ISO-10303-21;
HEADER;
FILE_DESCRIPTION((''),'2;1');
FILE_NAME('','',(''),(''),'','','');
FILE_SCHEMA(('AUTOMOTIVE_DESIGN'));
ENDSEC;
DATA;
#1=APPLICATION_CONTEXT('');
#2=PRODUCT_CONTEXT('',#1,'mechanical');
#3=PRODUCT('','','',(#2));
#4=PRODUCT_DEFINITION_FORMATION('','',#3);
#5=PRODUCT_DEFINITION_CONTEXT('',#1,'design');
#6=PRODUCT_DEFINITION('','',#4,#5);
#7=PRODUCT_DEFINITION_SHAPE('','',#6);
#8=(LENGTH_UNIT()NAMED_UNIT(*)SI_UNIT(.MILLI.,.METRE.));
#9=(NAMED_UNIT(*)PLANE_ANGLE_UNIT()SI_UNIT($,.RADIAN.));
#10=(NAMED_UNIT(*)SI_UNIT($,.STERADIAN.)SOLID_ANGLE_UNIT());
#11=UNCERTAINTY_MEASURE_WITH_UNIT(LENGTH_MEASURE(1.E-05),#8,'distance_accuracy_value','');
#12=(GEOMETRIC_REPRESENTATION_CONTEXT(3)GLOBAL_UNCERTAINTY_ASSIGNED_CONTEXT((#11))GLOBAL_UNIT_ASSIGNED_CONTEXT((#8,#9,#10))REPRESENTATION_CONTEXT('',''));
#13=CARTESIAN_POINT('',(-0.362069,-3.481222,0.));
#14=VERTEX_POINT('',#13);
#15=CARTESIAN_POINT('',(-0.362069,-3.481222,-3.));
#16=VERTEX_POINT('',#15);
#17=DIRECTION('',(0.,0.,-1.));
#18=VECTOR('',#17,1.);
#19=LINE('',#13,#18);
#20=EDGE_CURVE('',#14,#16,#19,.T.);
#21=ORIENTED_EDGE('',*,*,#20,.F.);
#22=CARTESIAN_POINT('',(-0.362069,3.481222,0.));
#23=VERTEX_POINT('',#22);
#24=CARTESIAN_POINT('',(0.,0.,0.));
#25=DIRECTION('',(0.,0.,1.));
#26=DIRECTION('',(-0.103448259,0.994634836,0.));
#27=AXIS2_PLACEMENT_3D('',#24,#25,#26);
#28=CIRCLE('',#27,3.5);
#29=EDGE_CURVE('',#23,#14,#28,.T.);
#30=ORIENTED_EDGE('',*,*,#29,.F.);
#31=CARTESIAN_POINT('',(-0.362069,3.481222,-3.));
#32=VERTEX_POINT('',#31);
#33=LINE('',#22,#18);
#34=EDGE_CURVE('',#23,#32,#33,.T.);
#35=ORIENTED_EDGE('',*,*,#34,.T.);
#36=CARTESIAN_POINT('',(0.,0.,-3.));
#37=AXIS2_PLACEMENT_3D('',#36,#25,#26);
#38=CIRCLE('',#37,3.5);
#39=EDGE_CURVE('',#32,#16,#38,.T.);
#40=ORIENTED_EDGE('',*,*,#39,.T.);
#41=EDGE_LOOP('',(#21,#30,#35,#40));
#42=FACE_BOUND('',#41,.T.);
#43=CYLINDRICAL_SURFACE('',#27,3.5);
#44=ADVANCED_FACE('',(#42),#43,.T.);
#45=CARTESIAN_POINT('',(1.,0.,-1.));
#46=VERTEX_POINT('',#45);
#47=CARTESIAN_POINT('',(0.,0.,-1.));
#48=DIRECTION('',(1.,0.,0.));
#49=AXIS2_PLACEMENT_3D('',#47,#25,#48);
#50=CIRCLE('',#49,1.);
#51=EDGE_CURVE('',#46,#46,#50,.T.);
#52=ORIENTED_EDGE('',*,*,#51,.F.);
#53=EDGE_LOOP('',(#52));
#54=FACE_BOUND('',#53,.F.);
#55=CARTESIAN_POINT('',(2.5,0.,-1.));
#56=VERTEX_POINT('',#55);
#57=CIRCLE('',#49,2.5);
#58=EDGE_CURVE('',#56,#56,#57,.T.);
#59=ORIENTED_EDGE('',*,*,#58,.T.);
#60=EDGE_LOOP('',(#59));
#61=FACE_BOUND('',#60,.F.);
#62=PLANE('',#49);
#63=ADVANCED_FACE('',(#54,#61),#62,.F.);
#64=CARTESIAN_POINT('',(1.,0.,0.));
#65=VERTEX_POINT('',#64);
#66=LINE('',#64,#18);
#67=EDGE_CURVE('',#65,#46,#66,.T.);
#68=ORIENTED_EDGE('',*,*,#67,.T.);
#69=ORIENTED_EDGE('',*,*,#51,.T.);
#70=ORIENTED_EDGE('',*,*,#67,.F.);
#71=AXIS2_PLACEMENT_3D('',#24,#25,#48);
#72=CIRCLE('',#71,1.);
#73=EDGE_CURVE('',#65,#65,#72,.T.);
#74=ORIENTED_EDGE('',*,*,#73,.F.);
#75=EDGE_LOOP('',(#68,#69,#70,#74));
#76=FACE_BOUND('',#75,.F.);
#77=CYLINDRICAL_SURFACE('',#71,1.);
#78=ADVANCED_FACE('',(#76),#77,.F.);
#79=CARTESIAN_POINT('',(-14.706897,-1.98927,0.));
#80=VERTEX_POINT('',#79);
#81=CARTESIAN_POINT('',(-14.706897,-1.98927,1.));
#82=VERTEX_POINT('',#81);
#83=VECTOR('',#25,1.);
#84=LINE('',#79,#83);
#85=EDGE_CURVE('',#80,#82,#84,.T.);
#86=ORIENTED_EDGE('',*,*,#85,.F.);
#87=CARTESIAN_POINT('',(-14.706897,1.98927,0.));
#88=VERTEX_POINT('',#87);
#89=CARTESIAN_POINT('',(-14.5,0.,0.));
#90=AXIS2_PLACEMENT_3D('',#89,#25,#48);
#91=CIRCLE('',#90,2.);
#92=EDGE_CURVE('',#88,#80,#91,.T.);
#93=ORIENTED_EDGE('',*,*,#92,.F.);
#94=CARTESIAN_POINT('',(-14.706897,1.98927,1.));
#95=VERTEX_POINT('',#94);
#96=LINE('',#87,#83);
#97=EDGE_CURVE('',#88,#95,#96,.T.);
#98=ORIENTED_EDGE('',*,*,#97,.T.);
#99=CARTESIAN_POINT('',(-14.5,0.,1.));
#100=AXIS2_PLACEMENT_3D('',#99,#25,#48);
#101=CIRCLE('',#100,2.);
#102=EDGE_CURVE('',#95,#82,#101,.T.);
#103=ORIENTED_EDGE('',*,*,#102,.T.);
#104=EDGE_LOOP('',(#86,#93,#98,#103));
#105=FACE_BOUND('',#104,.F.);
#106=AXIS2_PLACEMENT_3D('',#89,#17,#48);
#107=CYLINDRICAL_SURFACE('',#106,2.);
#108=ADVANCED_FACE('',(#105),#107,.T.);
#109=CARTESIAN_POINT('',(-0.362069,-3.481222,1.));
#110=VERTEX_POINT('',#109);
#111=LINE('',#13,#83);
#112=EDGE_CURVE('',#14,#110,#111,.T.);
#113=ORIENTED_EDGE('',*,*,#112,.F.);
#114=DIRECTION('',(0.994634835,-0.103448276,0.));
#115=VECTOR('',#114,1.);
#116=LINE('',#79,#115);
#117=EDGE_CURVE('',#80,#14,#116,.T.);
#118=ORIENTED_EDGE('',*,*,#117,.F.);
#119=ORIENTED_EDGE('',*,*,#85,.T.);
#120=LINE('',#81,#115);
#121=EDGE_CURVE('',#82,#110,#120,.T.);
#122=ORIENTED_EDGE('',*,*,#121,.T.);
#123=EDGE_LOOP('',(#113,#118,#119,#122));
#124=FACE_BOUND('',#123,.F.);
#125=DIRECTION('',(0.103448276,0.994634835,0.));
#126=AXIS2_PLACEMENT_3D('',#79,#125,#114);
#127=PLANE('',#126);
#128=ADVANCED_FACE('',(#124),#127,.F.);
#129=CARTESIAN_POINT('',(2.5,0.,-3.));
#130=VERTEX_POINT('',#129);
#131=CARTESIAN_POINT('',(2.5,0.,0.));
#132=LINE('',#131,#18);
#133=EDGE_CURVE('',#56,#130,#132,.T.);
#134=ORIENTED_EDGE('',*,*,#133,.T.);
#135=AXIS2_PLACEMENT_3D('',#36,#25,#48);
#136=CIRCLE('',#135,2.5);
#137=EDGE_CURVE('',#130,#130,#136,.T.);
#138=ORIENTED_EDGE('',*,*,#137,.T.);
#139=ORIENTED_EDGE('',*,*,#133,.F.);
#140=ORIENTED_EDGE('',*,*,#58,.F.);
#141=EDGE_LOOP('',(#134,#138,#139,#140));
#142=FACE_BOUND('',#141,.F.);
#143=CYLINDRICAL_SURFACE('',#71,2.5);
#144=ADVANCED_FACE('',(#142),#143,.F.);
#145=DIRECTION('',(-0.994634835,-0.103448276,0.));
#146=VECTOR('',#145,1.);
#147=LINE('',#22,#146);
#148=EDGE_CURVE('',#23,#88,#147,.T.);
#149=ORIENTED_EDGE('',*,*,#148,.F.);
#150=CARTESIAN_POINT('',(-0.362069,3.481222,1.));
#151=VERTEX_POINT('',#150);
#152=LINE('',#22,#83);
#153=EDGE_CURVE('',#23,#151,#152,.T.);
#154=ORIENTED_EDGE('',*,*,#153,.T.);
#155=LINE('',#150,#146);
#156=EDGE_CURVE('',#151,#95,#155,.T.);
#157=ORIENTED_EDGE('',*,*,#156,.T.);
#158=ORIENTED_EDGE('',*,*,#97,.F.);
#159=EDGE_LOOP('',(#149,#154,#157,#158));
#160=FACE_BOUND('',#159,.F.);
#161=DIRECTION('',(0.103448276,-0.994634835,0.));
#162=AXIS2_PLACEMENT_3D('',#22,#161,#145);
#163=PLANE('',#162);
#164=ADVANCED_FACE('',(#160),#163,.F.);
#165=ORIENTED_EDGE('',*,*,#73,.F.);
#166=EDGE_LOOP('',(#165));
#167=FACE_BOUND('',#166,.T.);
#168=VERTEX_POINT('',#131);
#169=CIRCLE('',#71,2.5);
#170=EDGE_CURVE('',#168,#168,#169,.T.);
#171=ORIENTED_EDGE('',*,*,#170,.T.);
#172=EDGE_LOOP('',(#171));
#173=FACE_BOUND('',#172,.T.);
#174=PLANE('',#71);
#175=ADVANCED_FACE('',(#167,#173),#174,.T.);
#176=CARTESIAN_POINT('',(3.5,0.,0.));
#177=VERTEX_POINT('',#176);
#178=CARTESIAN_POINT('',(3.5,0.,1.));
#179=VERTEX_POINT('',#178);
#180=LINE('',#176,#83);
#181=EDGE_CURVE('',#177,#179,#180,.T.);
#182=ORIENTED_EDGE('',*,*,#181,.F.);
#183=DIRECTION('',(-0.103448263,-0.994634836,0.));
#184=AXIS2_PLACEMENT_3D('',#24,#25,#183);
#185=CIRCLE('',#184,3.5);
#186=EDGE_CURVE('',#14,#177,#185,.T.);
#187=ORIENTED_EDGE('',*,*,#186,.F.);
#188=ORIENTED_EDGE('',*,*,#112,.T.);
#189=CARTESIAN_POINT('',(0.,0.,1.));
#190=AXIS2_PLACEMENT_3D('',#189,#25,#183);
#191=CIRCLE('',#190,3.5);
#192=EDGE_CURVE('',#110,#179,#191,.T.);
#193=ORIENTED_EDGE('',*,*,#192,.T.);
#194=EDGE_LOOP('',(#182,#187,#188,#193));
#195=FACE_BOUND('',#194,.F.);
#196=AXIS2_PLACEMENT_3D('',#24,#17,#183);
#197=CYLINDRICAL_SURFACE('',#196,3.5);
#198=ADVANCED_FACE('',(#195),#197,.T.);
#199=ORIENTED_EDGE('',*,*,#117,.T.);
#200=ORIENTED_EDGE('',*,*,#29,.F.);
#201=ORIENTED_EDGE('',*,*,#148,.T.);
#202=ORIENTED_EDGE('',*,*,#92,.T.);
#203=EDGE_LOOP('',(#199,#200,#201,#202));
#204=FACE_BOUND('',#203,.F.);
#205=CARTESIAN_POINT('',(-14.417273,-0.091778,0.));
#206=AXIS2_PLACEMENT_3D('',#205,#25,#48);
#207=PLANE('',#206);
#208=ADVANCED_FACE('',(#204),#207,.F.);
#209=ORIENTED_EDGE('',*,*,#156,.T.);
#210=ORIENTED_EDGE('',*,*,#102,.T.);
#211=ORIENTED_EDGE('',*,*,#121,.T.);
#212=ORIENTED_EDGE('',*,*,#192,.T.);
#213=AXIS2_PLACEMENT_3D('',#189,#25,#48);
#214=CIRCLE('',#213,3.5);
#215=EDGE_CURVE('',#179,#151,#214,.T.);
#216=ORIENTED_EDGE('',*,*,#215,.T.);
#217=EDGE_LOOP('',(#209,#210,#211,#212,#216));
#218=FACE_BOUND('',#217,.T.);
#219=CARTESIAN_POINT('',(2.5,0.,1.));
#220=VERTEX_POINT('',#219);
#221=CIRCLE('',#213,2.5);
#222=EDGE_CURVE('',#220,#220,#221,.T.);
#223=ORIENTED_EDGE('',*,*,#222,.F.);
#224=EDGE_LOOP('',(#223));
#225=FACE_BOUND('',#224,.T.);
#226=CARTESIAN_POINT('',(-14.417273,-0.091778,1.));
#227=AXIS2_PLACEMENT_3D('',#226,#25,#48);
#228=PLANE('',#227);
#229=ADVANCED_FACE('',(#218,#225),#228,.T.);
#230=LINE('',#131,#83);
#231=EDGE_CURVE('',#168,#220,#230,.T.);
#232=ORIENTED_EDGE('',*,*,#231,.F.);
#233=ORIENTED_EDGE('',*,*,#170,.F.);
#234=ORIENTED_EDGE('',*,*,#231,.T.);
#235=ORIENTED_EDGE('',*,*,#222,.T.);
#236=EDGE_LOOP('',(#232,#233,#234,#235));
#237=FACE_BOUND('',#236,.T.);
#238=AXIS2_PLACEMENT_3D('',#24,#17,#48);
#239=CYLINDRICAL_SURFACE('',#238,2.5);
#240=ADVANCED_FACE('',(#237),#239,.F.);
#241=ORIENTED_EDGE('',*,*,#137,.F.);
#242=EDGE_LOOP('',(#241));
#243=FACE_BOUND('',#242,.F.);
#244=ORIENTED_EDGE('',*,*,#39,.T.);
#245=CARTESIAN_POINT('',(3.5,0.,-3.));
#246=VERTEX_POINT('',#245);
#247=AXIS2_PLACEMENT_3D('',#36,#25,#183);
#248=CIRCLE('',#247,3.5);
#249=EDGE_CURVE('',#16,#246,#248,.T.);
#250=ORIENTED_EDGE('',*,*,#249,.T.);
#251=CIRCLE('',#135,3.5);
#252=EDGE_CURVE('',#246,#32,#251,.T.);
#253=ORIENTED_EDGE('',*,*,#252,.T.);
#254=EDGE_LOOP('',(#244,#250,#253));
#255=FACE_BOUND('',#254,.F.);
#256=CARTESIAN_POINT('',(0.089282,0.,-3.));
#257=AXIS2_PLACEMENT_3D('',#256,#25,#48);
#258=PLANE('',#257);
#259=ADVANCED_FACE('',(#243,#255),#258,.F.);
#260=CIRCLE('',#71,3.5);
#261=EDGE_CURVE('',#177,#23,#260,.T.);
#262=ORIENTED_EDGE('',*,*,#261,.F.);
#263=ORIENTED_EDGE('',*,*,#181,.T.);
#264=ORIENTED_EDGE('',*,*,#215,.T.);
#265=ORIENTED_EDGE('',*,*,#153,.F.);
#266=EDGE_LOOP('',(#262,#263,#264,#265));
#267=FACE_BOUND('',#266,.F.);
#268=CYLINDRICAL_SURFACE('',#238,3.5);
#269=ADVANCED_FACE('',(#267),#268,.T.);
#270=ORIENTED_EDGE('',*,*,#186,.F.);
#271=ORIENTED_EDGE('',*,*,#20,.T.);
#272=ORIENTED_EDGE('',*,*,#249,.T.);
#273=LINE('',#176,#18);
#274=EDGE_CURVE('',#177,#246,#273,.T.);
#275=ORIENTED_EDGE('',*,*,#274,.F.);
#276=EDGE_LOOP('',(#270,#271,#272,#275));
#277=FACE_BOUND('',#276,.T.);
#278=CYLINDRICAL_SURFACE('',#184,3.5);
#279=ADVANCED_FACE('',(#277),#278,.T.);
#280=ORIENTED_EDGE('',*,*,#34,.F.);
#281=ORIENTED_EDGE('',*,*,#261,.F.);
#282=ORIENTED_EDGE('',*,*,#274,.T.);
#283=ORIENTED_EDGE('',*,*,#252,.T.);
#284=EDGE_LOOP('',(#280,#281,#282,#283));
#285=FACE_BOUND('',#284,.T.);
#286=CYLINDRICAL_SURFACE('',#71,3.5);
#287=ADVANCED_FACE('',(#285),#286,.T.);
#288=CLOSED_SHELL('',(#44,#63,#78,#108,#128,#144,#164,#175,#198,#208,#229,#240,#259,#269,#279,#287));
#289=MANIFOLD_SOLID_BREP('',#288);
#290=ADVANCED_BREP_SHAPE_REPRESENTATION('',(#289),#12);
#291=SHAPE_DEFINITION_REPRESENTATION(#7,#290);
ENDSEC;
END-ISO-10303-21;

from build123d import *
from build123d import SkipClean  # not in build123d's __all__

# Parameters (mm, degrees)
F0_R     = 2.5
F1_DEPTH = 1
F2_DEPTH = 3
F0_R_2   = 1
F3_DEPTH = 1


# Not quite as in the source:
# - after a boolean that leaves OpenCascade's solid faulty, fix() repairs it


with BuildPart() as f1:
    # F0 (on Top) → F1 (new body)
    with BuildSketch(Plane.XY):
        with BuildLine():
            ThreePointArc((-12.5, 0), (-13.1609318732, 1.4855627054), (-14.7068965517, 1.9892696692))
            ThreePointArc((-14.7068965517, 1.9892696692), (-16.5, 0), (-14.7068965517, -1.9892696692))
            ThreePointArc((-14.7068965517, -1.9892696692), (-13.1609318732, -1.4855627054), (-12.5, 0))
        make_face()
        with BuildLine():
            ThreePointArc((-0.362068922, -3.4812219257), (-3.5, 7.5e-09), (-0.362068907, 3.4812219272))
            Line((-0.362068907, 3.4812219272), (-14.7068965517, 1.9892696692))
            ThreePointArc((-14.7068965517, 1.9892696692), (-13.1609318732, 1.4855627054), (-12.5, 0))
            ThreePointArc((-12.5, 0), (-13.1609318732, -1.4855627054), (-14.7068965517, -1.9892696692))
            Line((-14.7068965517, -1.9892696692), (-0.362068922, -3.4812219257))
        make_face()
        with BuildLine():
            ThreePointArc((-0.362068922, -3.4812219257), (2.3433692382, -2.5997347198), (3.5, 0))
            ThreePointArc((3.5, 0), (2.3433692438, 2.5997347148), (-0.362068907, 3.4812219272))
            ThreePointArc((-0.362068907, 3.4812219272), (-3.5, 7.5e-09), (-0.362068922, -3.4812219257))
        make_face()
        Circle(F0_R, mode=Mode.SUBTRACT)
    extrude(amount=F1_DEPTH)

    # F0 (on Top) → F2 (join)
    with BuildSketch(Plane.XY):
        with BuildLine():
            ThreePointArc((-0.362068922, -3.4812219257), (2.3433692382, -2.5997347198), (3.5, 0))
            ThreePointArc((3.5, 0), (2.3433692438, 2.5997347148), (-0.362068907, 3.4812219272))
            ThreePointArc((-0.362068907, 3.4812219272), (-3.5, 7.5e-09), (-0.362068922, -3.4812219257))
        make_face()
        Circle(F0_R, mode=Mode.SUBTRACT)
    with SkipClean():  # cleaning this boolean's faces spoils the solid; the shape is the same uncleaned
        extrude(amount=-F2_DEPTH)

    # F0 (on Top) → F3 (join)
    with BuildSketch(Plane.XY):
        Circle(F0_R)
        Circle(F0_R_2, mode=Mode.SUBTRACT)
    extrude(amount=-F3_DEPTH)

    add(f1.part.fix(), mode=Mode.REPLACE)


solid = f1.part
